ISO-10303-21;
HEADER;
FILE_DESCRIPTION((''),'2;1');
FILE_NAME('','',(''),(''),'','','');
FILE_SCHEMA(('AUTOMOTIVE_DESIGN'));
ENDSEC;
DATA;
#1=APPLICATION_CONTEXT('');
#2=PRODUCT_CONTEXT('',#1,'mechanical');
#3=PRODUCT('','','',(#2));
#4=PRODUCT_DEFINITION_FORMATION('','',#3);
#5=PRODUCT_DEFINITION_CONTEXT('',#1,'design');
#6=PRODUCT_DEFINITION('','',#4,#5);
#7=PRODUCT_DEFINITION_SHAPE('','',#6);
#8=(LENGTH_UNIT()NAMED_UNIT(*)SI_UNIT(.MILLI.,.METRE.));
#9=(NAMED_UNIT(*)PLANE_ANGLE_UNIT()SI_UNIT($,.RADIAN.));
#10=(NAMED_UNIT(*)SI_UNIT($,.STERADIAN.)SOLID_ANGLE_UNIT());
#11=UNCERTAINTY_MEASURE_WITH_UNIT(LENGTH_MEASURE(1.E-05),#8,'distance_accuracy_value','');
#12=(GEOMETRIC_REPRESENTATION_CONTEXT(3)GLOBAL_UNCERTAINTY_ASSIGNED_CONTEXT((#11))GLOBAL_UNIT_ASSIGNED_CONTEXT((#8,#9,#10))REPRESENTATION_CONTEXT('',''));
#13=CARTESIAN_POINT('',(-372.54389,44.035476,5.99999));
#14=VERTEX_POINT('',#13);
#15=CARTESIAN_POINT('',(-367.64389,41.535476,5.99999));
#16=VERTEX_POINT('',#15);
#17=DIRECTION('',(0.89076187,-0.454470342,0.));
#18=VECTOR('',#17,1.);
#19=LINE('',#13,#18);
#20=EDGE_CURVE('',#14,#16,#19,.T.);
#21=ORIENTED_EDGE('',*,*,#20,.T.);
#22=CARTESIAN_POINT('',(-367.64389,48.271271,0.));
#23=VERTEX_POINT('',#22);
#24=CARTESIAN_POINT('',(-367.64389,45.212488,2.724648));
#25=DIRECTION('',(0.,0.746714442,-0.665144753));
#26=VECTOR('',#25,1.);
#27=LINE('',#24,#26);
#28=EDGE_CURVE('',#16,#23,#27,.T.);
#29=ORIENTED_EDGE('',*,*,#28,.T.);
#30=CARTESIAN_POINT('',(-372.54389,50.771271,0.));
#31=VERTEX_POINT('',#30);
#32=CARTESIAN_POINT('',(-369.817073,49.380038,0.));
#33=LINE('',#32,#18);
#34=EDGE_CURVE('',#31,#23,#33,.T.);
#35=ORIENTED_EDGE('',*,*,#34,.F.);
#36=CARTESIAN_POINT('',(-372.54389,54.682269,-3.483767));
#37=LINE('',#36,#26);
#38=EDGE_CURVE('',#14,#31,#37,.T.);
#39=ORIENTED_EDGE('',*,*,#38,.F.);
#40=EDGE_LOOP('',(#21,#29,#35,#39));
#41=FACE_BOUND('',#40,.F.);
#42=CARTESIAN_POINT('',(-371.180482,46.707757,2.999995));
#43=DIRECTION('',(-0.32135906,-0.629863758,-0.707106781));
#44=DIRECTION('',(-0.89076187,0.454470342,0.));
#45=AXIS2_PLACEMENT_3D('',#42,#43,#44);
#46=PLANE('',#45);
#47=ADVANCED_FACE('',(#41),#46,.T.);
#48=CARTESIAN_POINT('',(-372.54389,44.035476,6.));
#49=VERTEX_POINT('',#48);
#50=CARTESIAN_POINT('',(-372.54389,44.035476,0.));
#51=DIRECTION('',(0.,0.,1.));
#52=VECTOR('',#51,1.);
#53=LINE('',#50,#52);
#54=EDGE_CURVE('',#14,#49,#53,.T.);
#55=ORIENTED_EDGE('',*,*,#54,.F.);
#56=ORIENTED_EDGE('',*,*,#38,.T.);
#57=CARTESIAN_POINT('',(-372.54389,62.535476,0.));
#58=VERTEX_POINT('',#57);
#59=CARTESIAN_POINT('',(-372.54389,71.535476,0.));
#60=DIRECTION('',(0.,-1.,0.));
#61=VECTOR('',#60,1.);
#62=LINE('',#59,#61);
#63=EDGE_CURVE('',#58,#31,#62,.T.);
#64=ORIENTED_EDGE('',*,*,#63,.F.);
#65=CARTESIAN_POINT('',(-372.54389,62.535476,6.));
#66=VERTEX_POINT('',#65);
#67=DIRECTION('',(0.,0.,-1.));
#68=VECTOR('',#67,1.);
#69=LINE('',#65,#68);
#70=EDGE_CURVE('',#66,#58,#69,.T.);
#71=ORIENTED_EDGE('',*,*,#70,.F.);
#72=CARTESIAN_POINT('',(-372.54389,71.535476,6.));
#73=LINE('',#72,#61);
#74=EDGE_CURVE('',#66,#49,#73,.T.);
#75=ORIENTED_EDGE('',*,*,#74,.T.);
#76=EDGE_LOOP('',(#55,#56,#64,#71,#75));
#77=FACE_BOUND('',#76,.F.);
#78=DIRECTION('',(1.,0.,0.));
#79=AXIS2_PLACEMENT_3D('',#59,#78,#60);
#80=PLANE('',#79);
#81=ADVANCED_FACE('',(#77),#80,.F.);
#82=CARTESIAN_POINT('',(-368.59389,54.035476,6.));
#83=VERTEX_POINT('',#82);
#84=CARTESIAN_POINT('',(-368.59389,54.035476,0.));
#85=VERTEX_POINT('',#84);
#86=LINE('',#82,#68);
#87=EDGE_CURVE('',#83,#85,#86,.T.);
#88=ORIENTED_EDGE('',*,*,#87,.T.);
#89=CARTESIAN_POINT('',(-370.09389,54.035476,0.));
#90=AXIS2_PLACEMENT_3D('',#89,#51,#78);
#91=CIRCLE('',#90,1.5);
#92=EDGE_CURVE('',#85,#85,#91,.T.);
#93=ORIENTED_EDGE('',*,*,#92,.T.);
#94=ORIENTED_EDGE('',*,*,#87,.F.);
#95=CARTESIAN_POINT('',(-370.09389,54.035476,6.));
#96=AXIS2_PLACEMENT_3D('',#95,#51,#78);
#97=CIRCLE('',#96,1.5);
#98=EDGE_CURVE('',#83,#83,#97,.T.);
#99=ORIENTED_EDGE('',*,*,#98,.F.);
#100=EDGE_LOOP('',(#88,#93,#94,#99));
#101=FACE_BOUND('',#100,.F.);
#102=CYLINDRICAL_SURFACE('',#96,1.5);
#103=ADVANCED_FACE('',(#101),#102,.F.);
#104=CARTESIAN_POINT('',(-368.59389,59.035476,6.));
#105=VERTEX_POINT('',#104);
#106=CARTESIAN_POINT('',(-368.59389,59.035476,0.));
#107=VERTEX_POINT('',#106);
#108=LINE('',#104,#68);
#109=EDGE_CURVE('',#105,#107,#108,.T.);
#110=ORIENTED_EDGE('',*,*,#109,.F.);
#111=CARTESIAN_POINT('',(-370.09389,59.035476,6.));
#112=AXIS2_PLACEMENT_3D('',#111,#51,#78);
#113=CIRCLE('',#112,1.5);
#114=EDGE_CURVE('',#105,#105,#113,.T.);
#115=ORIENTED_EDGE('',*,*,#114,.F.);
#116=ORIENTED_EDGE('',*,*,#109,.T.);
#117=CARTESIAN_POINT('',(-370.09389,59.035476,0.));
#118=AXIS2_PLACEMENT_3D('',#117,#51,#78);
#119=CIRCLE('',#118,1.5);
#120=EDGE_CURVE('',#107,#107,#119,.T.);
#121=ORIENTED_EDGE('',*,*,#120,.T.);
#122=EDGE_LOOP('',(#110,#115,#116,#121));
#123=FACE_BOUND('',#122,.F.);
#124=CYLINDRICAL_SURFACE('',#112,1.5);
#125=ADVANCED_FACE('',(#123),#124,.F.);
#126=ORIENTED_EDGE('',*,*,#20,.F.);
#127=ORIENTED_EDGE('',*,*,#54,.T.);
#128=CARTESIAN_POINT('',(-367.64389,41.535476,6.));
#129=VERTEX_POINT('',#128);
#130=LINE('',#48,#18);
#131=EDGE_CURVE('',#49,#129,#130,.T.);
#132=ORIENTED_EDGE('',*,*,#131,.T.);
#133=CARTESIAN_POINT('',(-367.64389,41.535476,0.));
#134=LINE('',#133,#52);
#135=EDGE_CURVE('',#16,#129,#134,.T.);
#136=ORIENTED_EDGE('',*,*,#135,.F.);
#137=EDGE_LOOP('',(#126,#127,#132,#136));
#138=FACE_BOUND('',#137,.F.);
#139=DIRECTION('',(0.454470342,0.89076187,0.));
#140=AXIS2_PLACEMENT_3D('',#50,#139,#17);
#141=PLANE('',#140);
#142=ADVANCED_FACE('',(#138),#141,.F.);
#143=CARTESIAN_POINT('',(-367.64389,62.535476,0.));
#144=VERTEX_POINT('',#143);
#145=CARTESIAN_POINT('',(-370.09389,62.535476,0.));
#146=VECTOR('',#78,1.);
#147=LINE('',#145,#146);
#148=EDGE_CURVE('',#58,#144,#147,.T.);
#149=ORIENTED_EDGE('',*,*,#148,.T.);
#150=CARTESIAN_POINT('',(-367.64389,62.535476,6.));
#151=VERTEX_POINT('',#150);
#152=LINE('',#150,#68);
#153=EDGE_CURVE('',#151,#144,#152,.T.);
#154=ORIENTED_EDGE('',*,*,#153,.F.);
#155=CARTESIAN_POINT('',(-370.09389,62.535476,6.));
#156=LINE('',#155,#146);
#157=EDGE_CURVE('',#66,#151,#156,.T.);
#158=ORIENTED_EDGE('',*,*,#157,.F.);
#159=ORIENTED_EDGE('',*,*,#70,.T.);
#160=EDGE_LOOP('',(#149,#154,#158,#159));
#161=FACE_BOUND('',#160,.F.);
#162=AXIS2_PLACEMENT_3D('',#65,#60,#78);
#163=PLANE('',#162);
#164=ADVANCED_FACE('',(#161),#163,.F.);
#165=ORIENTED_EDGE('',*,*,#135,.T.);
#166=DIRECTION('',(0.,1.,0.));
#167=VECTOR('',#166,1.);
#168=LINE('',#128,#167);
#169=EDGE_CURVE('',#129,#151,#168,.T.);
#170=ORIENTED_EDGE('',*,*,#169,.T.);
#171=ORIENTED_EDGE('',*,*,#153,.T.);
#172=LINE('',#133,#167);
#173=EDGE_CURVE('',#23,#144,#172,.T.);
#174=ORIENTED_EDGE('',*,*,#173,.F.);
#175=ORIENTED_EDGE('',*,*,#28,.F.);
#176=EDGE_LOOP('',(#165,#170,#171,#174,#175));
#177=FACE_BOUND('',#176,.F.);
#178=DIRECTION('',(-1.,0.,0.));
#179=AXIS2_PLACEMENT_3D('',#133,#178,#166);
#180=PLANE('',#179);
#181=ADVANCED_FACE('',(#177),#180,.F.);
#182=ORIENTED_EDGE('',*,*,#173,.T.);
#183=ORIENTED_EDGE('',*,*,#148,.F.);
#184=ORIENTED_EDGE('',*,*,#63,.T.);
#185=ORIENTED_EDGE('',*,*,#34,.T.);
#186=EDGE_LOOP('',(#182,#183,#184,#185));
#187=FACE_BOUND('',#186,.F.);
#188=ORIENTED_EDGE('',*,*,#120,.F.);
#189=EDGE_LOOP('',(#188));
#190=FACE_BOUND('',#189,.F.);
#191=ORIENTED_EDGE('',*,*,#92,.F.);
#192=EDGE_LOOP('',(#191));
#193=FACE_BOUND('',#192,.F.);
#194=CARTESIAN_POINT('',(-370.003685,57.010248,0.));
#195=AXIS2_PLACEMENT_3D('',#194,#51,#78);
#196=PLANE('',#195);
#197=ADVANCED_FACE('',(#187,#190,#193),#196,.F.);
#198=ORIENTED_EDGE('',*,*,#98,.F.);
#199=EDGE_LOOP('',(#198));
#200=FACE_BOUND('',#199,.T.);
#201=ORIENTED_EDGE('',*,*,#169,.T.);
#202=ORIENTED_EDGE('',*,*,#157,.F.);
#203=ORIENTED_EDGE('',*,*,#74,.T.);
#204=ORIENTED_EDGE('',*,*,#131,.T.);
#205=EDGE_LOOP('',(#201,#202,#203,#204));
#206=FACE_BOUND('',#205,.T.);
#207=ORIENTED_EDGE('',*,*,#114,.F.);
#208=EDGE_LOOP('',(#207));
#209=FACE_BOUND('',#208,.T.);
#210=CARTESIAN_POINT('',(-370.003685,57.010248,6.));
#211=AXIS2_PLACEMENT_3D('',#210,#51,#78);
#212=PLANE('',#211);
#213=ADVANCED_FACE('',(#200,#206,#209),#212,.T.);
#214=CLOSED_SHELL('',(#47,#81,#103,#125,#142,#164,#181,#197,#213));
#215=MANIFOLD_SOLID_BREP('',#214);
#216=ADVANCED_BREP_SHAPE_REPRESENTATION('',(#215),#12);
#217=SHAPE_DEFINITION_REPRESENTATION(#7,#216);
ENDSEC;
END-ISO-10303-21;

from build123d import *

# Parameters (mm, degrees)
F1_DEPTH = 6
F2_SIZE  = 5.99999
F3_W     = 4.9
F3_H     = 9
F3_R     = 1.5
F4_DEPTH = 6


# Not quite as in the source:
# - a fillet or chamfer is up to 0.001 mm smaller than in the source, because OpenCascade refuses the exact size


with BuildPart() as f1:
    # F0 (on Top) → F1 (new body)
    with BuildSketch(Plane.XY):
        Polygon((-367.6438903809, 71.5354757011), (-372.5438903809, 71.5354757011), (-372.5438903809, 44.0354757011), (-367.6438903809, 41.5354757011), align=None)
    extrude(amount=F1_DEPTH)

    # F2 (size 6 in the source; OpenCascade refuses exactly that, so slightly less here)
    f2_edges = [f1.edges().sort_by_distance(p)[0] for p in [
        (-370.09389, 42.785476, 0),
    ]]
    chamfer(f2_edges, length=F2_SIZE)

    # F3 (on face) → F4 (cut, through all)
    with BuildSketch(Plane.XY.offset(6)):
        with Locations((-370.0938903809, 67.0354757011)):
            Rectangle(F3_W, F3_H)
        with Locations((-370.0938903809, 59.0354757011)):
            Circle(F3_R)
        with Locations((-370.0938903809, 54.0354757011)):
            Circle(F3_R)
    extrude(amount=-F4_DEPTH, mode=Mode.SUBTRACT)


solid = f1.part
